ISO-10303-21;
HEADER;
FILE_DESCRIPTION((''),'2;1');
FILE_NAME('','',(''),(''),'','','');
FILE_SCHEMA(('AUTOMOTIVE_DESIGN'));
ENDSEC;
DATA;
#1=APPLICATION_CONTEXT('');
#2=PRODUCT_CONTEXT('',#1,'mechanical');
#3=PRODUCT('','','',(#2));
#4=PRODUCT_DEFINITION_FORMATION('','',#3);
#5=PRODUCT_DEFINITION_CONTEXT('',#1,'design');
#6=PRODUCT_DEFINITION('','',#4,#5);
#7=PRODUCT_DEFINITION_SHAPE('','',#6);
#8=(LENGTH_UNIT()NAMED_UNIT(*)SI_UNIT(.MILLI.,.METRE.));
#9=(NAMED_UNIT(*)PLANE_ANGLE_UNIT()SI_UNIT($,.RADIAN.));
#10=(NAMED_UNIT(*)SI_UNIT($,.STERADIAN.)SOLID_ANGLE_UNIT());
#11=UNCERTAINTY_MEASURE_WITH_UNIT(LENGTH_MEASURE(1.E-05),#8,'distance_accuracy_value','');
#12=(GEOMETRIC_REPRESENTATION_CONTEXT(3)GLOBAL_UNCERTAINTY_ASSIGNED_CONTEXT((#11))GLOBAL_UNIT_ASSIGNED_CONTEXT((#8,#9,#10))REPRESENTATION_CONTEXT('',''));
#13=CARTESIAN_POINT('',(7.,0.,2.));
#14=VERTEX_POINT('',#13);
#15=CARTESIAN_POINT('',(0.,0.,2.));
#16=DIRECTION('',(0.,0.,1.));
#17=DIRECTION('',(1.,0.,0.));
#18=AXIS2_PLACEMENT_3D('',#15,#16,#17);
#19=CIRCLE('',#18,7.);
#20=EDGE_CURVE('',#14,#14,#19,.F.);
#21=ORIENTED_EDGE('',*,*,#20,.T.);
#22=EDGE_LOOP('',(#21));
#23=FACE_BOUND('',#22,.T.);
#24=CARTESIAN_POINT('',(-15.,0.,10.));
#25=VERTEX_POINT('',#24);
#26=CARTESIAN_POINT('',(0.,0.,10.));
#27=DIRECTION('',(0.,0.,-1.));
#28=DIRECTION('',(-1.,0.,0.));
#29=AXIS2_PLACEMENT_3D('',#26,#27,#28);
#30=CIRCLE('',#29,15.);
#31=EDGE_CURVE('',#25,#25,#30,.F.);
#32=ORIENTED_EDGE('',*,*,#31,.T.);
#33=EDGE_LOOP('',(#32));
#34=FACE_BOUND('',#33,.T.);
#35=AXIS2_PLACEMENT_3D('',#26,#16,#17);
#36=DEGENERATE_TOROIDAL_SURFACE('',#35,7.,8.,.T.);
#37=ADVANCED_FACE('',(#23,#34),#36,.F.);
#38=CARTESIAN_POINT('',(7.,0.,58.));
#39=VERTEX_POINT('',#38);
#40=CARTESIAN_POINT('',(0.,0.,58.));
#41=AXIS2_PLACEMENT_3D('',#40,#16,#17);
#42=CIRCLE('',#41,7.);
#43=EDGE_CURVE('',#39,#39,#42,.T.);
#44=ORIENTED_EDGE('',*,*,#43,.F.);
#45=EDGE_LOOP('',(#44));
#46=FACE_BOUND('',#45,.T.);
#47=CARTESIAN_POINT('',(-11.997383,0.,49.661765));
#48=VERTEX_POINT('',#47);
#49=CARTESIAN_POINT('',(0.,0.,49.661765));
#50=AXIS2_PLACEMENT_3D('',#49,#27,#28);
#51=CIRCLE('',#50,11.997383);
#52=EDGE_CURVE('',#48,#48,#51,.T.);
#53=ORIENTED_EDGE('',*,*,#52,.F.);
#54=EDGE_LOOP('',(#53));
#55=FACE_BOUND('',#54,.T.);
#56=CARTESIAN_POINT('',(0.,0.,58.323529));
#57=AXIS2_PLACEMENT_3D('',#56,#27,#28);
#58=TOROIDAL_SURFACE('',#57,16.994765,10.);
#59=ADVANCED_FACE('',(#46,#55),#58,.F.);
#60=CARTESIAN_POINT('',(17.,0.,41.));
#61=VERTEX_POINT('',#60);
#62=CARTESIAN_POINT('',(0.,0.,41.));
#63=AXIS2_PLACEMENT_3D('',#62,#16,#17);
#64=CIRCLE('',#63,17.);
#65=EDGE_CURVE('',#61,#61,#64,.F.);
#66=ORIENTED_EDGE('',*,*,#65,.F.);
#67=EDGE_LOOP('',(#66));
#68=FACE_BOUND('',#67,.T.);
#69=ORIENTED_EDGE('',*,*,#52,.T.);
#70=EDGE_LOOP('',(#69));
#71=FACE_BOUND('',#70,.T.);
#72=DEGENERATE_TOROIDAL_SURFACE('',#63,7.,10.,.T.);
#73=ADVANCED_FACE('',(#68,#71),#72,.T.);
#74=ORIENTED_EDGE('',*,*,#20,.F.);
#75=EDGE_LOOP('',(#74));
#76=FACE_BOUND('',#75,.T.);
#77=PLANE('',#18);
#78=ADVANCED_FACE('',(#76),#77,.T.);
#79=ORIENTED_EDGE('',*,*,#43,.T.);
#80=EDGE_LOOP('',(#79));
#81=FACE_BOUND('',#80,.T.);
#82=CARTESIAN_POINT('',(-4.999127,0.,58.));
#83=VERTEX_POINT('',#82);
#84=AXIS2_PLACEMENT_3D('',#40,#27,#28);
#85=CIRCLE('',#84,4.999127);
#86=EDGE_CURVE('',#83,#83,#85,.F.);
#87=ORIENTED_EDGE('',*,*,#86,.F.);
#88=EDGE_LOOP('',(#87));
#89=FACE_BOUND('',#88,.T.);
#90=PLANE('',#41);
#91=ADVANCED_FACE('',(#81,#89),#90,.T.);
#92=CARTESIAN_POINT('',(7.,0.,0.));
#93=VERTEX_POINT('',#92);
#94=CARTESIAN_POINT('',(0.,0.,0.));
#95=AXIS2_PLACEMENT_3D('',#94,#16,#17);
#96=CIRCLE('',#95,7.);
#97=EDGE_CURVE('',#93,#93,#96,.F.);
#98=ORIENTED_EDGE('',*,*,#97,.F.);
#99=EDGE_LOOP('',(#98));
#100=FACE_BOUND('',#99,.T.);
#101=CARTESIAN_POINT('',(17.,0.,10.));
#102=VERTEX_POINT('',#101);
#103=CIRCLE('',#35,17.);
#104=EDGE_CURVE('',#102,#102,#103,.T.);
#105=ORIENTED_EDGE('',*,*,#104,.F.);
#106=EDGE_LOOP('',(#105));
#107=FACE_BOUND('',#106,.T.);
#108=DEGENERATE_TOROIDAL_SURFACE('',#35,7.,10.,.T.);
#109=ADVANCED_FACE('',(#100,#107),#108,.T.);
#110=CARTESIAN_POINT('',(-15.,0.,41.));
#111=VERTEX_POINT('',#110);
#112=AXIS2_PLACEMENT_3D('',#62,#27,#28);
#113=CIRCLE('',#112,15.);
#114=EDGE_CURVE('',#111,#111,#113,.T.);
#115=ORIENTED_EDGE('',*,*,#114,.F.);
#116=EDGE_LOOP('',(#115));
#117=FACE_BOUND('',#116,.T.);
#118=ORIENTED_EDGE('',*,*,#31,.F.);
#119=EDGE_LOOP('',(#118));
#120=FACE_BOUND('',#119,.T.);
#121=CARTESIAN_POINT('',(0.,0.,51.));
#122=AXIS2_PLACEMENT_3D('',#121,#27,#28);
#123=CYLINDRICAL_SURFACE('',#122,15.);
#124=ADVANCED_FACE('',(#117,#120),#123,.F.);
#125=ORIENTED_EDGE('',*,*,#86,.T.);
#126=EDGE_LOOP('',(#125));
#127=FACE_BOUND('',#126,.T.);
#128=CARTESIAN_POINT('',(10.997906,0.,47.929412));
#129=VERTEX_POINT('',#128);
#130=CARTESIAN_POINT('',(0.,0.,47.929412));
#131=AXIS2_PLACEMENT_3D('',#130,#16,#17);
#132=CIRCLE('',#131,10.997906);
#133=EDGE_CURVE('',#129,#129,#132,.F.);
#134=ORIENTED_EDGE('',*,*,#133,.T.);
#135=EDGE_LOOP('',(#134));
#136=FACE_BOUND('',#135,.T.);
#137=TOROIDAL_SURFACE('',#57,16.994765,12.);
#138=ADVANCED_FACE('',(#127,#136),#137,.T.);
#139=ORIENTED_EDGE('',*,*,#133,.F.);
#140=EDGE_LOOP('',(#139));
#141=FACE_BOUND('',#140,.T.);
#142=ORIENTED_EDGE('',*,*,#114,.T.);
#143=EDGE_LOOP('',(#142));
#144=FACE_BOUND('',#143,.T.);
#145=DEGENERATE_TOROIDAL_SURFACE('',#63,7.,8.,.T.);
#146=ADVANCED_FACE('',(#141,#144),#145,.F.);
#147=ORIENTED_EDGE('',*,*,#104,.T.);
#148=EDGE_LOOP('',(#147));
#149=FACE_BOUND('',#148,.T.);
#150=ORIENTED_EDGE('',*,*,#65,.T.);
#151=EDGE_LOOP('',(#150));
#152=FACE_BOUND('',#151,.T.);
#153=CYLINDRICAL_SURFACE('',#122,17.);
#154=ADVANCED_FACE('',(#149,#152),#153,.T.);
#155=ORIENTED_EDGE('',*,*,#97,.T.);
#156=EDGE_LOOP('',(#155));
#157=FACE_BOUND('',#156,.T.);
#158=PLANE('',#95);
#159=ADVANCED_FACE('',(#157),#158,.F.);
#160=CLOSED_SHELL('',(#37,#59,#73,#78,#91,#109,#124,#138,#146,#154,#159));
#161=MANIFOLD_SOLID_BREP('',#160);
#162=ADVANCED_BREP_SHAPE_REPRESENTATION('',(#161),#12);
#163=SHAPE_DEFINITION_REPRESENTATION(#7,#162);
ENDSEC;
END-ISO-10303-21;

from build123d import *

# Parameters (mm, degrees)
SKETCH1_R           = 17
BOSS_EXTRUDE1_DEPTH = 51
FILLET1_R           = 10
FILLET2_R           = 10
SKETCH2_R           = 7
BOSS_EXTRUDE2_DEPTH = 7
FILLET3_R           = 10
SHELL1_T            = -2


with BuildPart() as part:
    # Sketch1 → Boss-Extrude1 (new body)
    with BuildSketch(Plane.XY):
        Circle(SKETCH1_R)
    extrude(amount=BOSS_EXTRUDE1_DEPTH)

    # Fillet1
    fillet1_edges = [part.edges().sort_by_distance(p)[0] for p in [
        (-17, 0, 0),
    ]]
    fillet(fillet1_edges, radius=FILLET1_R)

    # Fillet2
    fillet2_edges = [part.edges().sort_by_distance(p)[0] for p in [
        (-17, 0, 51),
    ]]
    fillet(fillet2_edges, radius=FILLET2_R)

    # Sketch2 → Boss-Extrude2 (add)
    with BuildSketch(Plane.XY.offset(51)):
        Circle(SKETCH2_R)
    extrude(amount=BOSS_EXTRUDE2_DEPTH)

    # Fillet3
    # the kernel refuses this fillet: 10 mm, written as the material it adds along each edge
    with BuildSketch(Plane(origin=(0, 0, 51), x_dir=(1, 0, 0), z_dir=(0, -1, 0))) as fillet3_piece_1:
        with BuildLine():
            CenterArc((16.994765066, 7.323529412), FILLET3_R, 181.854010516, 58.163304996)
            Line((7, 7), (6.800104699, 6.993529412))
            ThreePointArc((6.800104699, 6.993529412), (6.8, 3.5), (6.8, 0))
            Line((6.8, 0), (7, -0.2))
            ThreePointArc((7, -0.2), (9.534996229, -0.53354374), (11.897434882, -1.511470588))
            Line((11.897434882, -1.511470588), (11.997382533, -1.338235294))
        make_face()
    revolve(axis=Axis((0, 0, 51), (0, 0, 1)))

    # Shell1
    shell1_openings = [part.faces().sort_by_distance(p)[0] for p in [
        (0, 0, 58),
    ]]
    offset(amount=SHELL1_T, openings=shell1_openings, kind=Kind.INTERSECTION)


solid = part.part
